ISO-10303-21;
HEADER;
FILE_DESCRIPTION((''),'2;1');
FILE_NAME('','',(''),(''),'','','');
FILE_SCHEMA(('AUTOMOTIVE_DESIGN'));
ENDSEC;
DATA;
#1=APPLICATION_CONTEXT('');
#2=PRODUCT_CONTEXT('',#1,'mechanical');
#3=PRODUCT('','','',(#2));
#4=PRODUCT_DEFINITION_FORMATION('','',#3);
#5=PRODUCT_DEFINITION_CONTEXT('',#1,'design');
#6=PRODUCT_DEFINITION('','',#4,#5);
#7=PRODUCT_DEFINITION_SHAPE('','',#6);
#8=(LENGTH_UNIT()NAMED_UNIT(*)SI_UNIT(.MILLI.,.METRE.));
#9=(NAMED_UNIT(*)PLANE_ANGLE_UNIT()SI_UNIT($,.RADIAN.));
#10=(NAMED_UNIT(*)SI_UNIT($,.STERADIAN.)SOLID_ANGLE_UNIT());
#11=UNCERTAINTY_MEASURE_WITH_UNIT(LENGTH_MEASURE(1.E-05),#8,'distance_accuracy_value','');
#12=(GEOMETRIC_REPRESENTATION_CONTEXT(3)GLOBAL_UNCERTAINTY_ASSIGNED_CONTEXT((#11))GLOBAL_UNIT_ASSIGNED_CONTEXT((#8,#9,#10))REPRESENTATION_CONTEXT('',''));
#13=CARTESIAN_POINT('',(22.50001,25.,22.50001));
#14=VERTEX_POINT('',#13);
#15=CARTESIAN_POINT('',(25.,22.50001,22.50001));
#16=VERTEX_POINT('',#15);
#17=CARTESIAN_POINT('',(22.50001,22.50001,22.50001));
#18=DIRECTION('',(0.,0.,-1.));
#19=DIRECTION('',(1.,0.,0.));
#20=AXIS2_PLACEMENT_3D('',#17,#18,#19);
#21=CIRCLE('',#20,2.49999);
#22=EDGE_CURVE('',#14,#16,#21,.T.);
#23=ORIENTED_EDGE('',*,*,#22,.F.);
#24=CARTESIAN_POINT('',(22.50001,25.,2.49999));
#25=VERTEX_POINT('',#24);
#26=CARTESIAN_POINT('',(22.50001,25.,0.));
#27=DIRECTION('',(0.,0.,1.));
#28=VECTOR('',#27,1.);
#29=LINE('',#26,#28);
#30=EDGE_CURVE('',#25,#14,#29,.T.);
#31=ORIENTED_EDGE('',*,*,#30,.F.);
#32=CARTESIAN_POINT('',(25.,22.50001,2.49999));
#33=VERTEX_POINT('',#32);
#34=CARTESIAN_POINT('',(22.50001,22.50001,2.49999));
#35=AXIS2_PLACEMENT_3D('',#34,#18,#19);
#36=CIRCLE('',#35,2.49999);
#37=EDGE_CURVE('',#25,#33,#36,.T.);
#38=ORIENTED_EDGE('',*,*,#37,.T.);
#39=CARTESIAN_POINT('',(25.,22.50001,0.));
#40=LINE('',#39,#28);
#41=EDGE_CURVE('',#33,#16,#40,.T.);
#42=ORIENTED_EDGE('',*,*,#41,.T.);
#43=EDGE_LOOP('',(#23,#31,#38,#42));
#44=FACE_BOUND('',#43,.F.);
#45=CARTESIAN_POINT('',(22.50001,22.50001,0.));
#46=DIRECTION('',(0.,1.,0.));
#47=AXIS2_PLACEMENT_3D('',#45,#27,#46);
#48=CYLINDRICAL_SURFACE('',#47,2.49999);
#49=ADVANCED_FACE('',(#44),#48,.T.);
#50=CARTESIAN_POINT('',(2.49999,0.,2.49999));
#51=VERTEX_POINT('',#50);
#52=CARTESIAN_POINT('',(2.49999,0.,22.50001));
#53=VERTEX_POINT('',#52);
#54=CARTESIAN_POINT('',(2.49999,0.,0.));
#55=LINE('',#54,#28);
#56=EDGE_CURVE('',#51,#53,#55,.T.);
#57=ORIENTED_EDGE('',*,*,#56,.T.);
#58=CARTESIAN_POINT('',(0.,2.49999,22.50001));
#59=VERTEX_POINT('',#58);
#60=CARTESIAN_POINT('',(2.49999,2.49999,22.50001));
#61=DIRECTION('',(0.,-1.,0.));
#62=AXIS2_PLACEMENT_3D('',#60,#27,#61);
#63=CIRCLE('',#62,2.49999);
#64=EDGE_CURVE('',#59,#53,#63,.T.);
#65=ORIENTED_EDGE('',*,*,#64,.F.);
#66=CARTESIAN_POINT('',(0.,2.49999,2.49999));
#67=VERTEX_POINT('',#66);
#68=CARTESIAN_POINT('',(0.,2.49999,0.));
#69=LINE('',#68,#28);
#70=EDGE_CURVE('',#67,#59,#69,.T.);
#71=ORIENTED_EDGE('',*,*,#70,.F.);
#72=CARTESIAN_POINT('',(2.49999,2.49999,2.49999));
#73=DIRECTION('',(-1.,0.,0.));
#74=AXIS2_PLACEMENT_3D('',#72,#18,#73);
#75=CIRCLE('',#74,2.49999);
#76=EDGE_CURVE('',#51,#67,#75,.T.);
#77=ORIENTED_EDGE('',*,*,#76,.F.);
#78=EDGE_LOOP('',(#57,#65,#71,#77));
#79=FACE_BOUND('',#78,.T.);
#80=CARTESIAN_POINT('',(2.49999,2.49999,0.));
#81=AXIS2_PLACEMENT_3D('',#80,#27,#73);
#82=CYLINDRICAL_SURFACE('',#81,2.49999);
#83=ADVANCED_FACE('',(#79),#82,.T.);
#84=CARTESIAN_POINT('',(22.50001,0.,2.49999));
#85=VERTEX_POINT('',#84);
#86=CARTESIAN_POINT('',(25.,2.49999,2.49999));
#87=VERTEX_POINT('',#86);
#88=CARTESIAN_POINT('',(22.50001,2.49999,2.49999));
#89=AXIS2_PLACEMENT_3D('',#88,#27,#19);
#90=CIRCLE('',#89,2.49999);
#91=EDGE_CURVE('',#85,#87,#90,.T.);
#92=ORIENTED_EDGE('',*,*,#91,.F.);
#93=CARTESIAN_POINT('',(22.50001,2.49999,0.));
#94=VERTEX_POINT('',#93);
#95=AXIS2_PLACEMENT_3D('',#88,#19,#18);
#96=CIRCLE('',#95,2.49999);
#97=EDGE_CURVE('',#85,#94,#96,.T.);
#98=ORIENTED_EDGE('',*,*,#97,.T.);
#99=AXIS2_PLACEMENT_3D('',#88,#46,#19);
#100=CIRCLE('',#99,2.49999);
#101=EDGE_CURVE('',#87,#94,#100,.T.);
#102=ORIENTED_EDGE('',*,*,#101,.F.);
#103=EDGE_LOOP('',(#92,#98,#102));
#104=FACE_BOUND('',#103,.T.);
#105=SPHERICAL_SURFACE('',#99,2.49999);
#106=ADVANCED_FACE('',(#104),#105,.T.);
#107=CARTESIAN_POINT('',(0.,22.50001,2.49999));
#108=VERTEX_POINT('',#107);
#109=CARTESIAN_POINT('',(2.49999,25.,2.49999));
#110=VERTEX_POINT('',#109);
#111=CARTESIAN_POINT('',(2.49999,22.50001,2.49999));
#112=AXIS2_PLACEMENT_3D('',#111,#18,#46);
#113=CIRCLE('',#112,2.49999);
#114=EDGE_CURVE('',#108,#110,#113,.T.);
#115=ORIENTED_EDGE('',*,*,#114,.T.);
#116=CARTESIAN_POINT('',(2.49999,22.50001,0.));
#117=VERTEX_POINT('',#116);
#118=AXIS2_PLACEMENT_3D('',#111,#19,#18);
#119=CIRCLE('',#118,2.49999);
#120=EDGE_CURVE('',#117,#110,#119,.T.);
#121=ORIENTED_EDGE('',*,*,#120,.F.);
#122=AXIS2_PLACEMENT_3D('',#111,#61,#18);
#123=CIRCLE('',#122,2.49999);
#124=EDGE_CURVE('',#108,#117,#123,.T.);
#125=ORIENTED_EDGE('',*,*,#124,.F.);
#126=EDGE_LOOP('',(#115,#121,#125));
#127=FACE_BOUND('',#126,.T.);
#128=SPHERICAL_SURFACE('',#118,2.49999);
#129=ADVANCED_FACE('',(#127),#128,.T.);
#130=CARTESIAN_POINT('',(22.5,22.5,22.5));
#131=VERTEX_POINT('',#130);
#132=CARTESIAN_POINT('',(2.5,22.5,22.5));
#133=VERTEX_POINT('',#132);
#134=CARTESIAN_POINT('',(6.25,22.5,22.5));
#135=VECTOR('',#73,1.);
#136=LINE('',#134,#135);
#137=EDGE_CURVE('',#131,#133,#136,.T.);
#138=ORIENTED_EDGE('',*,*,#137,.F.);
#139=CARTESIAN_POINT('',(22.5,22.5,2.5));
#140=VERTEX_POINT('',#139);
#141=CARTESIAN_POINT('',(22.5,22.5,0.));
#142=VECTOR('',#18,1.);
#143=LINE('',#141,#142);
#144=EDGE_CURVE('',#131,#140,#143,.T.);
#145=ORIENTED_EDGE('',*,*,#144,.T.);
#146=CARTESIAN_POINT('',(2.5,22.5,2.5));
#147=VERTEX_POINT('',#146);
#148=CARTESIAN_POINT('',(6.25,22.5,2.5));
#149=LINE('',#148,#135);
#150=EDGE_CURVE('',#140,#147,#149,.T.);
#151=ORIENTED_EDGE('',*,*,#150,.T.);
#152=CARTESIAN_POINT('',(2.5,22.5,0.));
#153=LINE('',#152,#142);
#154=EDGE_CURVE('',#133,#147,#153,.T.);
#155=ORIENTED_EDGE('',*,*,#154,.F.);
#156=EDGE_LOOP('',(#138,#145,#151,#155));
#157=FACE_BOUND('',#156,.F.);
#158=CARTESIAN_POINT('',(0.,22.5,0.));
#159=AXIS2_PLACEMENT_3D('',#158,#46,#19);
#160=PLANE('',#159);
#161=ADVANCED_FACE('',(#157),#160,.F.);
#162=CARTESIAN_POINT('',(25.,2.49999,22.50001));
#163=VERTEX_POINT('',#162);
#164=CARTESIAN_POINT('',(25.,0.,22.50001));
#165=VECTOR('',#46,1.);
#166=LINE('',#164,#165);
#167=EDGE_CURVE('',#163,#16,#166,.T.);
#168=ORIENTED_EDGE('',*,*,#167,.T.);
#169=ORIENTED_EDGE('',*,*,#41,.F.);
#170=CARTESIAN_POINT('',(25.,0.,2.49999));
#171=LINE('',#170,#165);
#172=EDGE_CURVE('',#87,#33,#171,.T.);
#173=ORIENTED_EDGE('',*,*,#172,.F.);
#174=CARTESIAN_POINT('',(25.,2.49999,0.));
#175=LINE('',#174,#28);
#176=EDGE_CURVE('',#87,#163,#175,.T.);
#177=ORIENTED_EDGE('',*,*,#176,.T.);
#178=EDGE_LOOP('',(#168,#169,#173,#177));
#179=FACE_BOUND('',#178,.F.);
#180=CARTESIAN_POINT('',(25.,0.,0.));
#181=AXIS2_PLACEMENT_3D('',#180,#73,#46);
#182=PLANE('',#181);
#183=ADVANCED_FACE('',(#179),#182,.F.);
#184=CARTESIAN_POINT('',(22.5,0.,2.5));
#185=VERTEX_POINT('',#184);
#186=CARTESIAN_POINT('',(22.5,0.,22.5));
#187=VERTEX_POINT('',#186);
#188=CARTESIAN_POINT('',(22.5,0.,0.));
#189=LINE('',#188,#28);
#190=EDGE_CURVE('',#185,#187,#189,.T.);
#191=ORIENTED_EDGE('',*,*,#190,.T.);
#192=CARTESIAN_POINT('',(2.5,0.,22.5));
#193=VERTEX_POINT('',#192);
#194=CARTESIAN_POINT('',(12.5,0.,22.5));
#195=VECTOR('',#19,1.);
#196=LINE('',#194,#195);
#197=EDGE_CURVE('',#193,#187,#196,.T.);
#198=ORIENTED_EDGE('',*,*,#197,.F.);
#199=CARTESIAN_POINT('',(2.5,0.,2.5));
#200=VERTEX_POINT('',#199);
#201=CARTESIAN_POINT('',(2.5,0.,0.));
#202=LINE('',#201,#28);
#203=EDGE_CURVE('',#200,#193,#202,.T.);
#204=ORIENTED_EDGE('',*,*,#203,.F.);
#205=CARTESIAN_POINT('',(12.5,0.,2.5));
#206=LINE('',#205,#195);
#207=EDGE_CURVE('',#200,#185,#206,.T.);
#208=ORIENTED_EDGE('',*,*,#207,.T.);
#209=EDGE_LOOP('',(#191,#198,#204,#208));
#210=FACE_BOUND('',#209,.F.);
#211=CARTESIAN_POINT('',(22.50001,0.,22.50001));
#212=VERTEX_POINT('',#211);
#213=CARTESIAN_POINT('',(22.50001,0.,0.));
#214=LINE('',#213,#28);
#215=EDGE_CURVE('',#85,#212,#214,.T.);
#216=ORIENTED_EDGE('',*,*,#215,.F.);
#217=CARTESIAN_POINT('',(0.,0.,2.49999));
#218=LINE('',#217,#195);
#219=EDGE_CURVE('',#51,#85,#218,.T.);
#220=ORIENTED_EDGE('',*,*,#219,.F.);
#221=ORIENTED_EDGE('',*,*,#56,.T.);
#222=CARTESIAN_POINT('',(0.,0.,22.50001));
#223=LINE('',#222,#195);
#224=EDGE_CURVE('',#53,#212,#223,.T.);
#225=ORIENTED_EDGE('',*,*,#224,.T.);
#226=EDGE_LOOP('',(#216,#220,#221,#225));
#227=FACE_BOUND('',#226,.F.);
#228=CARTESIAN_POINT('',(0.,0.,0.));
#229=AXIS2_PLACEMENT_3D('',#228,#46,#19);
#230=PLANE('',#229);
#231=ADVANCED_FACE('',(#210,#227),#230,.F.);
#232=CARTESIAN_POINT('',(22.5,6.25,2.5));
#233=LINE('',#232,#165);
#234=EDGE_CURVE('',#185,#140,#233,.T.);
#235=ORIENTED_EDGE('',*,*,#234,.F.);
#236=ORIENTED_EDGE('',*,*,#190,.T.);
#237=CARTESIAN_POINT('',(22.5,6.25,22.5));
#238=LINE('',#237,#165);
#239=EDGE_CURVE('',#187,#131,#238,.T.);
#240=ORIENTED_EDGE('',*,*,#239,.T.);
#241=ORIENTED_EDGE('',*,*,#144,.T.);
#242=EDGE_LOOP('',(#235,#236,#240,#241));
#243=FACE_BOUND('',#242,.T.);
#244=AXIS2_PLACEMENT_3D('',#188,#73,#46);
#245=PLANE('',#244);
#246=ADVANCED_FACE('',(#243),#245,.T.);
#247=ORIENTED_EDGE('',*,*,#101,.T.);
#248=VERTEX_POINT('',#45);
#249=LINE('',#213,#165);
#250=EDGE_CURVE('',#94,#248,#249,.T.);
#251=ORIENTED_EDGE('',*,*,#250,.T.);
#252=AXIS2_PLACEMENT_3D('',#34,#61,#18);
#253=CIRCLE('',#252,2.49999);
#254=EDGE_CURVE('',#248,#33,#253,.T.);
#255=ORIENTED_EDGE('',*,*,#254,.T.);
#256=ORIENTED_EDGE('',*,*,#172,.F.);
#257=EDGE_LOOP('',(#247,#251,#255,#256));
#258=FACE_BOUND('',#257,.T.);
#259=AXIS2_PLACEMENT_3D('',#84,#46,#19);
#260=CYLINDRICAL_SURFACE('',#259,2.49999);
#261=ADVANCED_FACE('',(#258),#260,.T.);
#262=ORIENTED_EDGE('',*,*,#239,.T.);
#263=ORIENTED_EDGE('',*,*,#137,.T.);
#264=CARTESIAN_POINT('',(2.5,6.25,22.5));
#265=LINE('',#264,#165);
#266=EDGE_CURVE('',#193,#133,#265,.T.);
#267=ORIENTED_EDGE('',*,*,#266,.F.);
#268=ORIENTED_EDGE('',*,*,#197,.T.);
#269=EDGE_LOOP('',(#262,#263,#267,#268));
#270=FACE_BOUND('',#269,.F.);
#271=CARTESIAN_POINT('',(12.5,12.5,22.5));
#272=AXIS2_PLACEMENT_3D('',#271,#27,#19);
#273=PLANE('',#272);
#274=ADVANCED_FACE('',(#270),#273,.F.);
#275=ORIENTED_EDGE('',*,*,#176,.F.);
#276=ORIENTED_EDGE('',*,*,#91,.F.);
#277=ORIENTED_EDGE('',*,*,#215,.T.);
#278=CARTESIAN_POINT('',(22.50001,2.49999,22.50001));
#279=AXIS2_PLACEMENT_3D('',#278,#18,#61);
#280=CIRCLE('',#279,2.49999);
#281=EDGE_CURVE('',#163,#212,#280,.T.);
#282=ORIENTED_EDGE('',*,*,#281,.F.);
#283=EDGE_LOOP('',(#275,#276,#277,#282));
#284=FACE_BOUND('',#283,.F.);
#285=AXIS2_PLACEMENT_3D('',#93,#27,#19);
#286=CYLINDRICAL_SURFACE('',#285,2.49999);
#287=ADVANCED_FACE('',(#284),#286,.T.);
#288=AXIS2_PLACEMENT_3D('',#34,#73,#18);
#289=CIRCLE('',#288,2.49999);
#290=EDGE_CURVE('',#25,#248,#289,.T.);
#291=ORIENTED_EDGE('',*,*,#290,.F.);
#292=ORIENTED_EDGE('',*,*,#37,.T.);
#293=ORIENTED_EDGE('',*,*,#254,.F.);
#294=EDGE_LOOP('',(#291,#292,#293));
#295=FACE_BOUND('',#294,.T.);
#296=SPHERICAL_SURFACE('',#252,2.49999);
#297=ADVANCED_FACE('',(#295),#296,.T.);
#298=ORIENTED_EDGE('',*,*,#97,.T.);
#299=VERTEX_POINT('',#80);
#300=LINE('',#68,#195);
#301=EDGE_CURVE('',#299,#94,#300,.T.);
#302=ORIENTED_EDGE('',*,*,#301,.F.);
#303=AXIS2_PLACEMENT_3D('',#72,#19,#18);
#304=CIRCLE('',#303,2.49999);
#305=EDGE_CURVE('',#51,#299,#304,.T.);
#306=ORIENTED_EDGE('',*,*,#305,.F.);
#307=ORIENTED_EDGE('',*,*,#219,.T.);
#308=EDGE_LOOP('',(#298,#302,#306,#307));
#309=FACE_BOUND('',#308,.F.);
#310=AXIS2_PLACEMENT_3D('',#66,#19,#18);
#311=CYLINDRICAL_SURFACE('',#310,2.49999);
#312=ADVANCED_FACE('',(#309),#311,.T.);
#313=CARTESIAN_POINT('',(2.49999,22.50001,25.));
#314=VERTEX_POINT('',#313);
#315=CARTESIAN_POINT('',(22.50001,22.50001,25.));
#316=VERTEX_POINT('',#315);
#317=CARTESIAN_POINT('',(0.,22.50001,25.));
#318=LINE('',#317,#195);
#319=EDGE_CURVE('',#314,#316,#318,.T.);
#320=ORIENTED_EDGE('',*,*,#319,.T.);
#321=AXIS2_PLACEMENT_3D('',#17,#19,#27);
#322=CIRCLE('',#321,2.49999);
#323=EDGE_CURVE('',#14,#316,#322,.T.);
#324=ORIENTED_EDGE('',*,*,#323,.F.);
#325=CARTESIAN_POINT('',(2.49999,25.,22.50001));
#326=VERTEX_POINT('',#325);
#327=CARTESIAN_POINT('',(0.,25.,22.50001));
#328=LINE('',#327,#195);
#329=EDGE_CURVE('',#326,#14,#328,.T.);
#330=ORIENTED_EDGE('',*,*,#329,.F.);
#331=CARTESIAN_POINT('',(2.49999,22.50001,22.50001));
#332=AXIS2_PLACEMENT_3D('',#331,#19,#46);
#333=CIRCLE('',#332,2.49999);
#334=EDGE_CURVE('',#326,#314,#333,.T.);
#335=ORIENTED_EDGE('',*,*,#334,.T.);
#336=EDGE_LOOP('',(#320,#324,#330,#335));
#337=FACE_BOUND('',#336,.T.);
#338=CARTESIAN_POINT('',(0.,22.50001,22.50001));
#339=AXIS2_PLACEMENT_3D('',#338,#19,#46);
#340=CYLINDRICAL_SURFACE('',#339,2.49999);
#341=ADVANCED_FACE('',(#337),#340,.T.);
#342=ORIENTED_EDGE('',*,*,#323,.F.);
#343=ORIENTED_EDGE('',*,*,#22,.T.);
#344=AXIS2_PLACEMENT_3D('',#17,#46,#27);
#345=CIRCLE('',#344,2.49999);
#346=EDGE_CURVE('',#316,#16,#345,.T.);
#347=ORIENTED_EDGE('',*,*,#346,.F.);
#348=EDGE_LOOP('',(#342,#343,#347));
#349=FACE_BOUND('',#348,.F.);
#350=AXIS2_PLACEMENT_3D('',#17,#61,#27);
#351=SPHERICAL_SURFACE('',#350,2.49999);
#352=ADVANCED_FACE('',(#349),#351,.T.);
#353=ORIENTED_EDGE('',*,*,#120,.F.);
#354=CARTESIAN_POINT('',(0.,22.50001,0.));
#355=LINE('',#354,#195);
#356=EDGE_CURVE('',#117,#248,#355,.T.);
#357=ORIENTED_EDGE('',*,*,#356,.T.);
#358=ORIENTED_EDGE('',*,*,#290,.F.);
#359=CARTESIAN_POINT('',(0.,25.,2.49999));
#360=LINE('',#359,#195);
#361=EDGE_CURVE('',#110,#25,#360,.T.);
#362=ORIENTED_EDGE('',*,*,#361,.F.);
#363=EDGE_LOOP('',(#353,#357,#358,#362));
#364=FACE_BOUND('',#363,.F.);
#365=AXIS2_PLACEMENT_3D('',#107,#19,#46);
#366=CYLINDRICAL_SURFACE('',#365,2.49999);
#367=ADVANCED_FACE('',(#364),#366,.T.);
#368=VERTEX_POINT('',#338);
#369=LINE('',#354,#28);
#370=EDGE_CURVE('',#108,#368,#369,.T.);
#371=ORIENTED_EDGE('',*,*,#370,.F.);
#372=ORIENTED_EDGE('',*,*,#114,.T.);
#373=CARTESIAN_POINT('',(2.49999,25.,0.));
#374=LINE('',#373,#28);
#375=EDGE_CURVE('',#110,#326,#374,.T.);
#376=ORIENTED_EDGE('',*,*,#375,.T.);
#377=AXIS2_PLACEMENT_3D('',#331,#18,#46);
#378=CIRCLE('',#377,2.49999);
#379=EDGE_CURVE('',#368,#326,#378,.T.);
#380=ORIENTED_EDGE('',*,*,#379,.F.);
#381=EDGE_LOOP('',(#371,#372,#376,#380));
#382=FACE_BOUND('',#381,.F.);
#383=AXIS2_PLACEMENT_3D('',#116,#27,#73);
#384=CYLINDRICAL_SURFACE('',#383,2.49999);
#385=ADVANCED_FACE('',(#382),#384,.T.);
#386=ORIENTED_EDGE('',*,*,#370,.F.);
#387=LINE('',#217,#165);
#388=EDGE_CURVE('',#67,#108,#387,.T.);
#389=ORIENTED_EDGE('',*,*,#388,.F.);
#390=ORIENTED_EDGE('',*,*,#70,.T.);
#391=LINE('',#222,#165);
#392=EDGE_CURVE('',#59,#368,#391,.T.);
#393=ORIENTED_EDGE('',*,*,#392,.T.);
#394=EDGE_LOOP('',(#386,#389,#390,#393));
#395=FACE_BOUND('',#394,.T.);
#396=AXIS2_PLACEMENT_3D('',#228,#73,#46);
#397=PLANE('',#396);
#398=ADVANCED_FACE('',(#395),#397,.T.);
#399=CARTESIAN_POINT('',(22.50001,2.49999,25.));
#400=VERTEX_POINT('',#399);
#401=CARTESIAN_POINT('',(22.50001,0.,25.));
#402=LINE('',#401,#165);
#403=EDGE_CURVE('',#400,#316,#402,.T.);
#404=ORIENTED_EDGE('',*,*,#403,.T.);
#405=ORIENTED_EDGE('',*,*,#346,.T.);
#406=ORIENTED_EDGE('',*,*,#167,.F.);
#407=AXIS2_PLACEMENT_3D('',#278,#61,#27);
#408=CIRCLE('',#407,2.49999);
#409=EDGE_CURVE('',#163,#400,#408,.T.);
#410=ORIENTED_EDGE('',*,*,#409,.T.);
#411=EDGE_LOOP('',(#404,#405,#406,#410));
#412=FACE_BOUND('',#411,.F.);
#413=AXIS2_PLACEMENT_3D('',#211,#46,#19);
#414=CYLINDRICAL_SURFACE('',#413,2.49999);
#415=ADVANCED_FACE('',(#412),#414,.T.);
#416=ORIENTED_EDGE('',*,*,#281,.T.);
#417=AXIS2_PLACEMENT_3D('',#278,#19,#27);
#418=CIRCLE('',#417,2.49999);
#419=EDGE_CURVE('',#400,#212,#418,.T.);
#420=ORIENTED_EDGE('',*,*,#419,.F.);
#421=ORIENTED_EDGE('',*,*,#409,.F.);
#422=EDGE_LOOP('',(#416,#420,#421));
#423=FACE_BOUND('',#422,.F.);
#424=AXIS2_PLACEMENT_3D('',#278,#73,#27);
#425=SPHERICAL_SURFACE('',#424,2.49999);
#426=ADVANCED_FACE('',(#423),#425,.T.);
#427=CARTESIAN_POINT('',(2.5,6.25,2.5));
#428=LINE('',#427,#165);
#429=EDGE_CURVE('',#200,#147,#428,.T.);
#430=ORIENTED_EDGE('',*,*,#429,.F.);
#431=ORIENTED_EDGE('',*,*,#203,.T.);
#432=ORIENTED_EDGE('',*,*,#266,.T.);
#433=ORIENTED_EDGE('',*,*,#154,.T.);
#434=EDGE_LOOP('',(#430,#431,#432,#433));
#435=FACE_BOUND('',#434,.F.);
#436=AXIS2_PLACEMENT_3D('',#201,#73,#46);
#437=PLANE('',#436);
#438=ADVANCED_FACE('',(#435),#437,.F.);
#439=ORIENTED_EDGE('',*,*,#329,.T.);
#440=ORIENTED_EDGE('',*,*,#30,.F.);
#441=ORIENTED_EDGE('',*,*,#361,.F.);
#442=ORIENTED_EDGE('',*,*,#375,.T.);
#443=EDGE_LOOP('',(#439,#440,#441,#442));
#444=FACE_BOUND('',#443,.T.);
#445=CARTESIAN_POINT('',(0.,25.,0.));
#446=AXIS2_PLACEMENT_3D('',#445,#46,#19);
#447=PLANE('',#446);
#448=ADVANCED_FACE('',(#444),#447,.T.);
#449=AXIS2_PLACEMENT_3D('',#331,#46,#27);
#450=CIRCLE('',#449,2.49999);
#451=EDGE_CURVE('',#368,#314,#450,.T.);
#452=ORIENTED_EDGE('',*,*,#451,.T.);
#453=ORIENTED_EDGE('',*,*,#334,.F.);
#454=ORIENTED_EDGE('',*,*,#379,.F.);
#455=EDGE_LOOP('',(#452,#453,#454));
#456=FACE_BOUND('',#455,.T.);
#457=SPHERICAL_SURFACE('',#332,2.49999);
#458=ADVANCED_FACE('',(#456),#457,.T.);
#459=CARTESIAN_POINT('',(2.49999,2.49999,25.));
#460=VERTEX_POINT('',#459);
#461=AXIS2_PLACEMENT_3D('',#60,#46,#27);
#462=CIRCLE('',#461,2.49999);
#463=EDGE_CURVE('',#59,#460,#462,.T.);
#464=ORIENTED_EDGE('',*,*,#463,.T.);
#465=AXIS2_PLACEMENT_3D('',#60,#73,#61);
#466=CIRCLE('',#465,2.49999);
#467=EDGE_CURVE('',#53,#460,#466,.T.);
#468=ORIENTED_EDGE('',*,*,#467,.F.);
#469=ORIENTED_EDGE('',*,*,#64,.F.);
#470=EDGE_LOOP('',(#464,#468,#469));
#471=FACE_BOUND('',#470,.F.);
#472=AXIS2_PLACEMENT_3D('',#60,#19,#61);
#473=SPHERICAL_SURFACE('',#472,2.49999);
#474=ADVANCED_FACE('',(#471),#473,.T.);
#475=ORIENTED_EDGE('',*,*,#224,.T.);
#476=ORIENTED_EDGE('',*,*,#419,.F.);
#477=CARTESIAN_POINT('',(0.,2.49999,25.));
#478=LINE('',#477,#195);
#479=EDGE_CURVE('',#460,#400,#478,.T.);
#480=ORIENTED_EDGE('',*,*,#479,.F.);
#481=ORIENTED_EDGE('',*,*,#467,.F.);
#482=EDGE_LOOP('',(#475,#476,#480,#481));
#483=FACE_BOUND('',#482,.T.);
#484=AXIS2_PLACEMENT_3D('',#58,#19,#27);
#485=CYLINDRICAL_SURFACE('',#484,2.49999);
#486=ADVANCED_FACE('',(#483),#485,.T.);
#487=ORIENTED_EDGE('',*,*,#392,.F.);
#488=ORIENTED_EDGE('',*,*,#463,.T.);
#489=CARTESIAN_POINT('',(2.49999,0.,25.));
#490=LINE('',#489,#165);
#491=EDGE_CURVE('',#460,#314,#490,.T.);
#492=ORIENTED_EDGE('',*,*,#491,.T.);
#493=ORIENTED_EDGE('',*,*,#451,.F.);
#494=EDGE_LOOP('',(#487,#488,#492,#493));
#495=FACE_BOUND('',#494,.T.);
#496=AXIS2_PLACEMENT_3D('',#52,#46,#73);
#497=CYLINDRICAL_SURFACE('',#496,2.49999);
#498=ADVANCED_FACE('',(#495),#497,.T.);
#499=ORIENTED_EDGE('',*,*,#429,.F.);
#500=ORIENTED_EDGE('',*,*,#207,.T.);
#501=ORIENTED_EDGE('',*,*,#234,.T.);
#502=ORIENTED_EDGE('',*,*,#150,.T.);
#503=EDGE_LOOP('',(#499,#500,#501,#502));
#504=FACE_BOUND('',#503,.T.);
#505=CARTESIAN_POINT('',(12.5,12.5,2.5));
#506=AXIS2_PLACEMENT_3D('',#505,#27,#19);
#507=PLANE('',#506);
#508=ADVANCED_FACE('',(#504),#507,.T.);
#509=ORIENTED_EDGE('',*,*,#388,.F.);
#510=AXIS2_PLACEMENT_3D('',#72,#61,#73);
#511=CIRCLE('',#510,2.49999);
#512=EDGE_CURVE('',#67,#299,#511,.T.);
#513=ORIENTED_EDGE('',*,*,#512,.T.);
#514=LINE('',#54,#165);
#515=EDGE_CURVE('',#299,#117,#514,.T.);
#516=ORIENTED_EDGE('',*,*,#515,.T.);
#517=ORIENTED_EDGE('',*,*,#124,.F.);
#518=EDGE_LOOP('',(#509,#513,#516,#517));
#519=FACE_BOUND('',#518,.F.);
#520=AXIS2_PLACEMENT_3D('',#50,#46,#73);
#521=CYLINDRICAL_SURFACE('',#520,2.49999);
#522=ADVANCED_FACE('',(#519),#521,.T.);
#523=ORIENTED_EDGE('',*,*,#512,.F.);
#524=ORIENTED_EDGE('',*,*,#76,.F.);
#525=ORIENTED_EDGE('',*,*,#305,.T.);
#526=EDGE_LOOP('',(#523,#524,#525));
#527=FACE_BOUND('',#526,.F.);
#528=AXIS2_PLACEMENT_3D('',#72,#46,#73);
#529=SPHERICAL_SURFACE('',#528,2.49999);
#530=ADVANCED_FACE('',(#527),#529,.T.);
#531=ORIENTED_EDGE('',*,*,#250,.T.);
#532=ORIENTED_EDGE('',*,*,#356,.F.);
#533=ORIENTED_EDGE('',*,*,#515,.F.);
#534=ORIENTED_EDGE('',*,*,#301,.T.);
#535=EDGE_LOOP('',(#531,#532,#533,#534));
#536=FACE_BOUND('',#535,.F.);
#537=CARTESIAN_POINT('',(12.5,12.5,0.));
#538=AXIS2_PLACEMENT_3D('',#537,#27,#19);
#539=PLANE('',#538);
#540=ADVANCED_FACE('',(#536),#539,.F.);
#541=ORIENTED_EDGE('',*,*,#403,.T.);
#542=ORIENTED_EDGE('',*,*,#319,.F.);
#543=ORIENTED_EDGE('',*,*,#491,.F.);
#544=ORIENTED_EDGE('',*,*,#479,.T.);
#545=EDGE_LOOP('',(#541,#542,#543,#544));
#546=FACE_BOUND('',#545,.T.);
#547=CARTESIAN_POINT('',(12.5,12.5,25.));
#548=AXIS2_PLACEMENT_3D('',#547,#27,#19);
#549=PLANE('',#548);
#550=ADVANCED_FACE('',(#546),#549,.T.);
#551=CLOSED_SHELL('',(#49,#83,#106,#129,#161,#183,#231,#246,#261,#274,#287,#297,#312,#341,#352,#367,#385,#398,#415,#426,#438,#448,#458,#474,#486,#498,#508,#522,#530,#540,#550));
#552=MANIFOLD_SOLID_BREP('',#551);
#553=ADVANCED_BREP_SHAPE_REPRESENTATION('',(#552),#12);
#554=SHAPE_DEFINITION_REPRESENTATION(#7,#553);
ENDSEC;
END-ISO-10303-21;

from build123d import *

# Parameters (mm, degrees)
F0_W     = 25
F0_H     = 25
F1_DEPTH = 25
F2_T     = -2.5
F3_R     = 2.49999


# Not quite as in the source:
# - a fillet or chamfer is up to 0.001 mm smaller than in the source, because OpenCascade refuses the exact size


with BuildPart() as f1:
    # F0 (on Top) → F1 (new body)
    with BuildSketch(Plane.XY):
        with Locations((12.5, 12.5)):
            Rectangle(F0_W, F0_H)
    extrude(amount=F1_DEPTH)

    # F2
    f2_openings = [f1.faces().sort_by_distance(p)[0] for p in [
        (12.5, 0, 12.5),
    ]]
    offset(amount=F2_T, openings=f2_openings)

    # F3 (radius 2.5 in the source; OpenCascade refuses exactly that, so slightly less here)
    f3_edges = [f1.edges().sort_by_distance(p)[0] for p in [
        (12.5, 0, 25),
        (25, 12.5, 0),
        (12.5, 25, 0),
        (0, 12.5, 0),
        (25, 12.5, 25),
        (12.5, 25, 25),
        (0, 25, 12.5),
        (0, 0, 12.5),
        (0, 12.5, 25),
        (25, 0, 12.5),
        (25, 25, 12.5),
        (12.5, 0, 0),
    ]]
    fillet(f3_edges, radius=F3_R)


solid = f1.part
